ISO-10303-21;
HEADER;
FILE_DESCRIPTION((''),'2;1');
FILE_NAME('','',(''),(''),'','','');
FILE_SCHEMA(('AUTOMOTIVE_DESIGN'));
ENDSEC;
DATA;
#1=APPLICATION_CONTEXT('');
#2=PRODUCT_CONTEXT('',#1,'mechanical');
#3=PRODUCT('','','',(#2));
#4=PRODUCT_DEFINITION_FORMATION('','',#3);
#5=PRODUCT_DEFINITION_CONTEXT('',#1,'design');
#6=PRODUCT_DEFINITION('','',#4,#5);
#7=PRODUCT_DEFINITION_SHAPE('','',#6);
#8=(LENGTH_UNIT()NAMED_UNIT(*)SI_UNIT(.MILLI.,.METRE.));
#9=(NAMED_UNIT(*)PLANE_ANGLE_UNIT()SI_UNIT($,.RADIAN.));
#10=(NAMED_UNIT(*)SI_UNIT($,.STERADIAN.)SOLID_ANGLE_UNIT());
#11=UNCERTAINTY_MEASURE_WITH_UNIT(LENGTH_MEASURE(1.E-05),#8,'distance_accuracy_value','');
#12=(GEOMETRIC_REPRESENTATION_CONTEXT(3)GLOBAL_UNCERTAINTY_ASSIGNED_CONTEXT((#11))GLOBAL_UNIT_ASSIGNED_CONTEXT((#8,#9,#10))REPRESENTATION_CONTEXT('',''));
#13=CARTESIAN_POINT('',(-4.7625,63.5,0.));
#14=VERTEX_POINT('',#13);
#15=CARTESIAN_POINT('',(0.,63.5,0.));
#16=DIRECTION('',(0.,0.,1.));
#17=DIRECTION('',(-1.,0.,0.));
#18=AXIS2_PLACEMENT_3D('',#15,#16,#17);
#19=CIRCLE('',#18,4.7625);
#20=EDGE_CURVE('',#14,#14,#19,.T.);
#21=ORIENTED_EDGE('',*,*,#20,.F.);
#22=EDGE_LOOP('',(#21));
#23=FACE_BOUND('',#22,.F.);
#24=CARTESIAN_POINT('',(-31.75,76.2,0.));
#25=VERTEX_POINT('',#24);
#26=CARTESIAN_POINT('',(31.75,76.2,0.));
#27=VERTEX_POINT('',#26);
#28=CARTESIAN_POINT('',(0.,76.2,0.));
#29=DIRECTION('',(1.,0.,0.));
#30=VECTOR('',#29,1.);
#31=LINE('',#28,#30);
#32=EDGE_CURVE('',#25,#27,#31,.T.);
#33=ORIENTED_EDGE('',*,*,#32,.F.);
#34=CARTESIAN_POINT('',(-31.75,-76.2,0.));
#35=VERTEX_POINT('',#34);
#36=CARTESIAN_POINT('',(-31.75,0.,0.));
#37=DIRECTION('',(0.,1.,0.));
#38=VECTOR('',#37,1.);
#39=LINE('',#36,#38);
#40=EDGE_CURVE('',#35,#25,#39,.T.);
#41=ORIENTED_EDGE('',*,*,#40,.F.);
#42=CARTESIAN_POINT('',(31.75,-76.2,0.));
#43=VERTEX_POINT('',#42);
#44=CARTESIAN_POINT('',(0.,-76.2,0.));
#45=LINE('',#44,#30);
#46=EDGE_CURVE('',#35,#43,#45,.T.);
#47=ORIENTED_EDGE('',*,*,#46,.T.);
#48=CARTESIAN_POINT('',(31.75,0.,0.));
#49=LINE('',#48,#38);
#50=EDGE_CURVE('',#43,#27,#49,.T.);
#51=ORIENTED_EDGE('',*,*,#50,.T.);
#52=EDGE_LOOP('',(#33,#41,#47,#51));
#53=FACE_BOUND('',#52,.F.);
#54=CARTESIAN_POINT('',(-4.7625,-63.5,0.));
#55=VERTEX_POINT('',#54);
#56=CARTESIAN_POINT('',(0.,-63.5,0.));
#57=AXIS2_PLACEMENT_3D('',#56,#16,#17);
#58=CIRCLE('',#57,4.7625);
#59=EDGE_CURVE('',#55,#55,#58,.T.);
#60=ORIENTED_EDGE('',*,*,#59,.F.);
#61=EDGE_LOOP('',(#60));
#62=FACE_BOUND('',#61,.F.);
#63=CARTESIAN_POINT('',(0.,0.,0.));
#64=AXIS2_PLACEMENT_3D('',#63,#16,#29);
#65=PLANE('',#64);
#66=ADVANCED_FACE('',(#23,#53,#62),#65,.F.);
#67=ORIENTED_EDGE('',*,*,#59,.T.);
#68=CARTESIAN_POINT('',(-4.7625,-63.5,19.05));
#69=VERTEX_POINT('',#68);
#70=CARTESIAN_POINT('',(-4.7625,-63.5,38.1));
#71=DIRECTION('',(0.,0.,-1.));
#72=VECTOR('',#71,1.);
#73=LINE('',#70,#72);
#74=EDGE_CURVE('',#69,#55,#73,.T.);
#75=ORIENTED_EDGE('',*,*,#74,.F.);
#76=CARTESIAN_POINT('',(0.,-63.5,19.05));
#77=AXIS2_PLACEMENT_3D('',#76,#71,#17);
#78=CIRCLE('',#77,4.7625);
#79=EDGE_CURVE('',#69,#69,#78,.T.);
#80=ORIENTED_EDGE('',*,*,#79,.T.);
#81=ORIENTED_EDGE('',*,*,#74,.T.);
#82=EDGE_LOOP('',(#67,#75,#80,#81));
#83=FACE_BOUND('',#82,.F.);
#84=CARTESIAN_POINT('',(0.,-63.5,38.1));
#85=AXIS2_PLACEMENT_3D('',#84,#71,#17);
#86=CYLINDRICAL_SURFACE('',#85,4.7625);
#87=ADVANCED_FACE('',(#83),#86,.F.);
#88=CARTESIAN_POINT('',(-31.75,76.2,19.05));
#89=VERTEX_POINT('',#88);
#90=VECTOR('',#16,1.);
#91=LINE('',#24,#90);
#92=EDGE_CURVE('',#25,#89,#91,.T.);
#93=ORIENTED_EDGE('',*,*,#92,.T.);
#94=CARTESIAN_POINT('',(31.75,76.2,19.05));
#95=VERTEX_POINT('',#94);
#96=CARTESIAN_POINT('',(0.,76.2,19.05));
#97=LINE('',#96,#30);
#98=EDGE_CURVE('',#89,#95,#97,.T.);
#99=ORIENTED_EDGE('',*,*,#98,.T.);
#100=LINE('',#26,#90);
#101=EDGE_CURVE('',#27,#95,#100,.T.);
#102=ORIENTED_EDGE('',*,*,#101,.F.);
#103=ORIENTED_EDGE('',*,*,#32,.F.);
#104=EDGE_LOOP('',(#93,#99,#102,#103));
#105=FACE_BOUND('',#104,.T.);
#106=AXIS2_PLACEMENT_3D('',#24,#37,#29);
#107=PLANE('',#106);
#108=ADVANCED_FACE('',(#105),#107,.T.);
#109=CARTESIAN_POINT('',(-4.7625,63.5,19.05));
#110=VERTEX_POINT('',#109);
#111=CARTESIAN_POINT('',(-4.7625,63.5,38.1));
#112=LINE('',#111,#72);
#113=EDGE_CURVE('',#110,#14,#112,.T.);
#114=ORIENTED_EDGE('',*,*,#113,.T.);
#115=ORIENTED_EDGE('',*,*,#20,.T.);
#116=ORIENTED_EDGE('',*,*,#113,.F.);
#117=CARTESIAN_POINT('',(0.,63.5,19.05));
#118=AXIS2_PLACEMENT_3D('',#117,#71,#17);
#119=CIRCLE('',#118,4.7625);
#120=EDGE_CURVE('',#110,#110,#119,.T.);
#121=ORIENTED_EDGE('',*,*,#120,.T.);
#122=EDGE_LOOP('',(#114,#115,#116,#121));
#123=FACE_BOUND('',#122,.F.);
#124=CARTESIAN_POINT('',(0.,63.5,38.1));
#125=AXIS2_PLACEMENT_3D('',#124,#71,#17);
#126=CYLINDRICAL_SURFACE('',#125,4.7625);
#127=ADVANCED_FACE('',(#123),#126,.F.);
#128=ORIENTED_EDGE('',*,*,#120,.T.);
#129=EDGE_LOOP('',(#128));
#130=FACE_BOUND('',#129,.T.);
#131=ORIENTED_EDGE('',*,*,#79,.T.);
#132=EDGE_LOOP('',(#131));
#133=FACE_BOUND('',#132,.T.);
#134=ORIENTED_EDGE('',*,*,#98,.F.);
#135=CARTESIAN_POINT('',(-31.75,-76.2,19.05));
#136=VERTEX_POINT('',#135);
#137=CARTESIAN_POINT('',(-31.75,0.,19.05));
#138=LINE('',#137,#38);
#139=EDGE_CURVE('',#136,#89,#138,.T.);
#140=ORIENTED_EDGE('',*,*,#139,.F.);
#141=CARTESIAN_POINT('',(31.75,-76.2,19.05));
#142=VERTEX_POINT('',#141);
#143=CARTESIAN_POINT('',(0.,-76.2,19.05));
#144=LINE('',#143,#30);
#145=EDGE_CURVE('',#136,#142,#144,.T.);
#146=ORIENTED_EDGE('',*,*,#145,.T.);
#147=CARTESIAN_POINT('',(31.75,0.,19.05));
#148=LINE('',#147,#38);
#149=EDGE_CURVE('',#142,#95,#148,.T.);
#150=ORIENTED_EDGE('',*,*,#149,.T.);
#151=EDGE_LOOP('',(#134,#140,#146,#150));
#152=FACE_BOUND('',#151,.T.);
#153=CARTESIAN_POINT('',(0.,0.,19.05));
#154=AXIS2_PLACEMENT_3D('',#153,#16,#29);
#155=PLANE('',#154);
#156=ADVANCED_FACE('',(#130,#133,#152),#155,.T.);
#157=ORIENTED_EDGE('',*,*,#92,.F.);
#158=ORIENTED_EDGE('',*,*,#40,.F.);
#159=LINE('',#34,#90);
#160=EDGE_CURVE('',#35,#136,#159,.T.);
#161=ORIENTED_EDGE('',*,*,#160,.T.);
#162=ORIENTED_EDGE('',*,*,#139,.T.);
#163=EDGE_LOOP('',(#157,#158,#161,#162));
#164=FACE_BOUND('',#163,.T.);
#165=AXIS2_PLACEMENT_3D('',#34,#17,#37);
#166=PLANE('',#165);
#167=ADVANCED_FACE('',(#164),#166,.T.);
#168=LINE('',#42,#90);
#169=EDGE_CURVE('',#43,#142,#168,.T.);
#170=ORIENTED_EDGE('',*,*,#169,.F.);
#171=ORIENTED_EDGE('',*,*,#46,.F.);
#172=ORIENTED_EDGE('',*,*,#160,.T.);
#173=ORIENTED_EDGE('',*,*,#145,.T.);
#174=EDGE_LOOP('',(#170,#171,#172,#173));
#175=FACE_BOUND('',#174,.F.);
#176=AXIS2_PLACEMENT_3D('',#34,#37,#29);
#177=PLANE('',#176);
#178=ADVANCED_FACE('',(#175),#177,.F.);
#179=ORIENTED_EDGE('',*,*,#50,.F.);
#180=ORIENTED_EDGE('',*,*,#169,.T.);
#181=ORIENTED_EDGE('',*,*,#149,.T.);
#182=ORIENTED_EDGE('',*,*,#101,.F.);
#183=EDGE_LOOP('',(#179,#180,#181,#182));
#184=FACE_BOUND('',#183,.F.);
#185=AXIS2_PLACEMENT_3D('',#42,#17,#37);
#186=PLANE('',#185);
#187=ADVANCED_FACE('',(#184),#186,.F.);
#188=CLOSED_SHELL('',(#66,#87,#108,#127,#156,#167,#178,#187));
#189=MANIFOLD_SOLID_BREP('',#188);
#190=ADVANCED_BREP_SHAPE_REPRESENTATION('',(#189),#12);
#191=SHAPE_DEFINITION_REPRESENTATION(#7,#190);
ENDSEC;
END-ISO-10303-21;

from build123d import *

# Parameters (mm, degrees)
F0_W     = 63.5
F0_H     = 152.4
F1_DEPTH = 19.05
F3_D     = 9.525
F3_DEPTH = 19.05
F3_TIP   = 2.8615986981


# Not quite as in the source:
# - a length typed as a fraction of an inch, garbled in the dataset ("3 / 203.2 mm" for 3/8 in), is restored


with BuildPart() as f1:
    # F0 (on Top) → F1 (new body)
    with BuildSketch(Plane.XY):
        Rectangle(F0_W, F0_H)
    extrude(amount=F1_DEPTH)

    # F3
    with Locations(Plane.XY.offset(19.05)):
        with Locations((0, -63.5), (0, 63.5)):
            Hole(F3_D / 2, depth=F3_DEPTH)
            with Locations((0, 0, -(F3_DEPTH + F3_TIP / 2))):  # 118° drill point
                Cone(0, F3_D / 2, F3_TIP, mode=Mode.SUBTRACT)


solid = f1.part
